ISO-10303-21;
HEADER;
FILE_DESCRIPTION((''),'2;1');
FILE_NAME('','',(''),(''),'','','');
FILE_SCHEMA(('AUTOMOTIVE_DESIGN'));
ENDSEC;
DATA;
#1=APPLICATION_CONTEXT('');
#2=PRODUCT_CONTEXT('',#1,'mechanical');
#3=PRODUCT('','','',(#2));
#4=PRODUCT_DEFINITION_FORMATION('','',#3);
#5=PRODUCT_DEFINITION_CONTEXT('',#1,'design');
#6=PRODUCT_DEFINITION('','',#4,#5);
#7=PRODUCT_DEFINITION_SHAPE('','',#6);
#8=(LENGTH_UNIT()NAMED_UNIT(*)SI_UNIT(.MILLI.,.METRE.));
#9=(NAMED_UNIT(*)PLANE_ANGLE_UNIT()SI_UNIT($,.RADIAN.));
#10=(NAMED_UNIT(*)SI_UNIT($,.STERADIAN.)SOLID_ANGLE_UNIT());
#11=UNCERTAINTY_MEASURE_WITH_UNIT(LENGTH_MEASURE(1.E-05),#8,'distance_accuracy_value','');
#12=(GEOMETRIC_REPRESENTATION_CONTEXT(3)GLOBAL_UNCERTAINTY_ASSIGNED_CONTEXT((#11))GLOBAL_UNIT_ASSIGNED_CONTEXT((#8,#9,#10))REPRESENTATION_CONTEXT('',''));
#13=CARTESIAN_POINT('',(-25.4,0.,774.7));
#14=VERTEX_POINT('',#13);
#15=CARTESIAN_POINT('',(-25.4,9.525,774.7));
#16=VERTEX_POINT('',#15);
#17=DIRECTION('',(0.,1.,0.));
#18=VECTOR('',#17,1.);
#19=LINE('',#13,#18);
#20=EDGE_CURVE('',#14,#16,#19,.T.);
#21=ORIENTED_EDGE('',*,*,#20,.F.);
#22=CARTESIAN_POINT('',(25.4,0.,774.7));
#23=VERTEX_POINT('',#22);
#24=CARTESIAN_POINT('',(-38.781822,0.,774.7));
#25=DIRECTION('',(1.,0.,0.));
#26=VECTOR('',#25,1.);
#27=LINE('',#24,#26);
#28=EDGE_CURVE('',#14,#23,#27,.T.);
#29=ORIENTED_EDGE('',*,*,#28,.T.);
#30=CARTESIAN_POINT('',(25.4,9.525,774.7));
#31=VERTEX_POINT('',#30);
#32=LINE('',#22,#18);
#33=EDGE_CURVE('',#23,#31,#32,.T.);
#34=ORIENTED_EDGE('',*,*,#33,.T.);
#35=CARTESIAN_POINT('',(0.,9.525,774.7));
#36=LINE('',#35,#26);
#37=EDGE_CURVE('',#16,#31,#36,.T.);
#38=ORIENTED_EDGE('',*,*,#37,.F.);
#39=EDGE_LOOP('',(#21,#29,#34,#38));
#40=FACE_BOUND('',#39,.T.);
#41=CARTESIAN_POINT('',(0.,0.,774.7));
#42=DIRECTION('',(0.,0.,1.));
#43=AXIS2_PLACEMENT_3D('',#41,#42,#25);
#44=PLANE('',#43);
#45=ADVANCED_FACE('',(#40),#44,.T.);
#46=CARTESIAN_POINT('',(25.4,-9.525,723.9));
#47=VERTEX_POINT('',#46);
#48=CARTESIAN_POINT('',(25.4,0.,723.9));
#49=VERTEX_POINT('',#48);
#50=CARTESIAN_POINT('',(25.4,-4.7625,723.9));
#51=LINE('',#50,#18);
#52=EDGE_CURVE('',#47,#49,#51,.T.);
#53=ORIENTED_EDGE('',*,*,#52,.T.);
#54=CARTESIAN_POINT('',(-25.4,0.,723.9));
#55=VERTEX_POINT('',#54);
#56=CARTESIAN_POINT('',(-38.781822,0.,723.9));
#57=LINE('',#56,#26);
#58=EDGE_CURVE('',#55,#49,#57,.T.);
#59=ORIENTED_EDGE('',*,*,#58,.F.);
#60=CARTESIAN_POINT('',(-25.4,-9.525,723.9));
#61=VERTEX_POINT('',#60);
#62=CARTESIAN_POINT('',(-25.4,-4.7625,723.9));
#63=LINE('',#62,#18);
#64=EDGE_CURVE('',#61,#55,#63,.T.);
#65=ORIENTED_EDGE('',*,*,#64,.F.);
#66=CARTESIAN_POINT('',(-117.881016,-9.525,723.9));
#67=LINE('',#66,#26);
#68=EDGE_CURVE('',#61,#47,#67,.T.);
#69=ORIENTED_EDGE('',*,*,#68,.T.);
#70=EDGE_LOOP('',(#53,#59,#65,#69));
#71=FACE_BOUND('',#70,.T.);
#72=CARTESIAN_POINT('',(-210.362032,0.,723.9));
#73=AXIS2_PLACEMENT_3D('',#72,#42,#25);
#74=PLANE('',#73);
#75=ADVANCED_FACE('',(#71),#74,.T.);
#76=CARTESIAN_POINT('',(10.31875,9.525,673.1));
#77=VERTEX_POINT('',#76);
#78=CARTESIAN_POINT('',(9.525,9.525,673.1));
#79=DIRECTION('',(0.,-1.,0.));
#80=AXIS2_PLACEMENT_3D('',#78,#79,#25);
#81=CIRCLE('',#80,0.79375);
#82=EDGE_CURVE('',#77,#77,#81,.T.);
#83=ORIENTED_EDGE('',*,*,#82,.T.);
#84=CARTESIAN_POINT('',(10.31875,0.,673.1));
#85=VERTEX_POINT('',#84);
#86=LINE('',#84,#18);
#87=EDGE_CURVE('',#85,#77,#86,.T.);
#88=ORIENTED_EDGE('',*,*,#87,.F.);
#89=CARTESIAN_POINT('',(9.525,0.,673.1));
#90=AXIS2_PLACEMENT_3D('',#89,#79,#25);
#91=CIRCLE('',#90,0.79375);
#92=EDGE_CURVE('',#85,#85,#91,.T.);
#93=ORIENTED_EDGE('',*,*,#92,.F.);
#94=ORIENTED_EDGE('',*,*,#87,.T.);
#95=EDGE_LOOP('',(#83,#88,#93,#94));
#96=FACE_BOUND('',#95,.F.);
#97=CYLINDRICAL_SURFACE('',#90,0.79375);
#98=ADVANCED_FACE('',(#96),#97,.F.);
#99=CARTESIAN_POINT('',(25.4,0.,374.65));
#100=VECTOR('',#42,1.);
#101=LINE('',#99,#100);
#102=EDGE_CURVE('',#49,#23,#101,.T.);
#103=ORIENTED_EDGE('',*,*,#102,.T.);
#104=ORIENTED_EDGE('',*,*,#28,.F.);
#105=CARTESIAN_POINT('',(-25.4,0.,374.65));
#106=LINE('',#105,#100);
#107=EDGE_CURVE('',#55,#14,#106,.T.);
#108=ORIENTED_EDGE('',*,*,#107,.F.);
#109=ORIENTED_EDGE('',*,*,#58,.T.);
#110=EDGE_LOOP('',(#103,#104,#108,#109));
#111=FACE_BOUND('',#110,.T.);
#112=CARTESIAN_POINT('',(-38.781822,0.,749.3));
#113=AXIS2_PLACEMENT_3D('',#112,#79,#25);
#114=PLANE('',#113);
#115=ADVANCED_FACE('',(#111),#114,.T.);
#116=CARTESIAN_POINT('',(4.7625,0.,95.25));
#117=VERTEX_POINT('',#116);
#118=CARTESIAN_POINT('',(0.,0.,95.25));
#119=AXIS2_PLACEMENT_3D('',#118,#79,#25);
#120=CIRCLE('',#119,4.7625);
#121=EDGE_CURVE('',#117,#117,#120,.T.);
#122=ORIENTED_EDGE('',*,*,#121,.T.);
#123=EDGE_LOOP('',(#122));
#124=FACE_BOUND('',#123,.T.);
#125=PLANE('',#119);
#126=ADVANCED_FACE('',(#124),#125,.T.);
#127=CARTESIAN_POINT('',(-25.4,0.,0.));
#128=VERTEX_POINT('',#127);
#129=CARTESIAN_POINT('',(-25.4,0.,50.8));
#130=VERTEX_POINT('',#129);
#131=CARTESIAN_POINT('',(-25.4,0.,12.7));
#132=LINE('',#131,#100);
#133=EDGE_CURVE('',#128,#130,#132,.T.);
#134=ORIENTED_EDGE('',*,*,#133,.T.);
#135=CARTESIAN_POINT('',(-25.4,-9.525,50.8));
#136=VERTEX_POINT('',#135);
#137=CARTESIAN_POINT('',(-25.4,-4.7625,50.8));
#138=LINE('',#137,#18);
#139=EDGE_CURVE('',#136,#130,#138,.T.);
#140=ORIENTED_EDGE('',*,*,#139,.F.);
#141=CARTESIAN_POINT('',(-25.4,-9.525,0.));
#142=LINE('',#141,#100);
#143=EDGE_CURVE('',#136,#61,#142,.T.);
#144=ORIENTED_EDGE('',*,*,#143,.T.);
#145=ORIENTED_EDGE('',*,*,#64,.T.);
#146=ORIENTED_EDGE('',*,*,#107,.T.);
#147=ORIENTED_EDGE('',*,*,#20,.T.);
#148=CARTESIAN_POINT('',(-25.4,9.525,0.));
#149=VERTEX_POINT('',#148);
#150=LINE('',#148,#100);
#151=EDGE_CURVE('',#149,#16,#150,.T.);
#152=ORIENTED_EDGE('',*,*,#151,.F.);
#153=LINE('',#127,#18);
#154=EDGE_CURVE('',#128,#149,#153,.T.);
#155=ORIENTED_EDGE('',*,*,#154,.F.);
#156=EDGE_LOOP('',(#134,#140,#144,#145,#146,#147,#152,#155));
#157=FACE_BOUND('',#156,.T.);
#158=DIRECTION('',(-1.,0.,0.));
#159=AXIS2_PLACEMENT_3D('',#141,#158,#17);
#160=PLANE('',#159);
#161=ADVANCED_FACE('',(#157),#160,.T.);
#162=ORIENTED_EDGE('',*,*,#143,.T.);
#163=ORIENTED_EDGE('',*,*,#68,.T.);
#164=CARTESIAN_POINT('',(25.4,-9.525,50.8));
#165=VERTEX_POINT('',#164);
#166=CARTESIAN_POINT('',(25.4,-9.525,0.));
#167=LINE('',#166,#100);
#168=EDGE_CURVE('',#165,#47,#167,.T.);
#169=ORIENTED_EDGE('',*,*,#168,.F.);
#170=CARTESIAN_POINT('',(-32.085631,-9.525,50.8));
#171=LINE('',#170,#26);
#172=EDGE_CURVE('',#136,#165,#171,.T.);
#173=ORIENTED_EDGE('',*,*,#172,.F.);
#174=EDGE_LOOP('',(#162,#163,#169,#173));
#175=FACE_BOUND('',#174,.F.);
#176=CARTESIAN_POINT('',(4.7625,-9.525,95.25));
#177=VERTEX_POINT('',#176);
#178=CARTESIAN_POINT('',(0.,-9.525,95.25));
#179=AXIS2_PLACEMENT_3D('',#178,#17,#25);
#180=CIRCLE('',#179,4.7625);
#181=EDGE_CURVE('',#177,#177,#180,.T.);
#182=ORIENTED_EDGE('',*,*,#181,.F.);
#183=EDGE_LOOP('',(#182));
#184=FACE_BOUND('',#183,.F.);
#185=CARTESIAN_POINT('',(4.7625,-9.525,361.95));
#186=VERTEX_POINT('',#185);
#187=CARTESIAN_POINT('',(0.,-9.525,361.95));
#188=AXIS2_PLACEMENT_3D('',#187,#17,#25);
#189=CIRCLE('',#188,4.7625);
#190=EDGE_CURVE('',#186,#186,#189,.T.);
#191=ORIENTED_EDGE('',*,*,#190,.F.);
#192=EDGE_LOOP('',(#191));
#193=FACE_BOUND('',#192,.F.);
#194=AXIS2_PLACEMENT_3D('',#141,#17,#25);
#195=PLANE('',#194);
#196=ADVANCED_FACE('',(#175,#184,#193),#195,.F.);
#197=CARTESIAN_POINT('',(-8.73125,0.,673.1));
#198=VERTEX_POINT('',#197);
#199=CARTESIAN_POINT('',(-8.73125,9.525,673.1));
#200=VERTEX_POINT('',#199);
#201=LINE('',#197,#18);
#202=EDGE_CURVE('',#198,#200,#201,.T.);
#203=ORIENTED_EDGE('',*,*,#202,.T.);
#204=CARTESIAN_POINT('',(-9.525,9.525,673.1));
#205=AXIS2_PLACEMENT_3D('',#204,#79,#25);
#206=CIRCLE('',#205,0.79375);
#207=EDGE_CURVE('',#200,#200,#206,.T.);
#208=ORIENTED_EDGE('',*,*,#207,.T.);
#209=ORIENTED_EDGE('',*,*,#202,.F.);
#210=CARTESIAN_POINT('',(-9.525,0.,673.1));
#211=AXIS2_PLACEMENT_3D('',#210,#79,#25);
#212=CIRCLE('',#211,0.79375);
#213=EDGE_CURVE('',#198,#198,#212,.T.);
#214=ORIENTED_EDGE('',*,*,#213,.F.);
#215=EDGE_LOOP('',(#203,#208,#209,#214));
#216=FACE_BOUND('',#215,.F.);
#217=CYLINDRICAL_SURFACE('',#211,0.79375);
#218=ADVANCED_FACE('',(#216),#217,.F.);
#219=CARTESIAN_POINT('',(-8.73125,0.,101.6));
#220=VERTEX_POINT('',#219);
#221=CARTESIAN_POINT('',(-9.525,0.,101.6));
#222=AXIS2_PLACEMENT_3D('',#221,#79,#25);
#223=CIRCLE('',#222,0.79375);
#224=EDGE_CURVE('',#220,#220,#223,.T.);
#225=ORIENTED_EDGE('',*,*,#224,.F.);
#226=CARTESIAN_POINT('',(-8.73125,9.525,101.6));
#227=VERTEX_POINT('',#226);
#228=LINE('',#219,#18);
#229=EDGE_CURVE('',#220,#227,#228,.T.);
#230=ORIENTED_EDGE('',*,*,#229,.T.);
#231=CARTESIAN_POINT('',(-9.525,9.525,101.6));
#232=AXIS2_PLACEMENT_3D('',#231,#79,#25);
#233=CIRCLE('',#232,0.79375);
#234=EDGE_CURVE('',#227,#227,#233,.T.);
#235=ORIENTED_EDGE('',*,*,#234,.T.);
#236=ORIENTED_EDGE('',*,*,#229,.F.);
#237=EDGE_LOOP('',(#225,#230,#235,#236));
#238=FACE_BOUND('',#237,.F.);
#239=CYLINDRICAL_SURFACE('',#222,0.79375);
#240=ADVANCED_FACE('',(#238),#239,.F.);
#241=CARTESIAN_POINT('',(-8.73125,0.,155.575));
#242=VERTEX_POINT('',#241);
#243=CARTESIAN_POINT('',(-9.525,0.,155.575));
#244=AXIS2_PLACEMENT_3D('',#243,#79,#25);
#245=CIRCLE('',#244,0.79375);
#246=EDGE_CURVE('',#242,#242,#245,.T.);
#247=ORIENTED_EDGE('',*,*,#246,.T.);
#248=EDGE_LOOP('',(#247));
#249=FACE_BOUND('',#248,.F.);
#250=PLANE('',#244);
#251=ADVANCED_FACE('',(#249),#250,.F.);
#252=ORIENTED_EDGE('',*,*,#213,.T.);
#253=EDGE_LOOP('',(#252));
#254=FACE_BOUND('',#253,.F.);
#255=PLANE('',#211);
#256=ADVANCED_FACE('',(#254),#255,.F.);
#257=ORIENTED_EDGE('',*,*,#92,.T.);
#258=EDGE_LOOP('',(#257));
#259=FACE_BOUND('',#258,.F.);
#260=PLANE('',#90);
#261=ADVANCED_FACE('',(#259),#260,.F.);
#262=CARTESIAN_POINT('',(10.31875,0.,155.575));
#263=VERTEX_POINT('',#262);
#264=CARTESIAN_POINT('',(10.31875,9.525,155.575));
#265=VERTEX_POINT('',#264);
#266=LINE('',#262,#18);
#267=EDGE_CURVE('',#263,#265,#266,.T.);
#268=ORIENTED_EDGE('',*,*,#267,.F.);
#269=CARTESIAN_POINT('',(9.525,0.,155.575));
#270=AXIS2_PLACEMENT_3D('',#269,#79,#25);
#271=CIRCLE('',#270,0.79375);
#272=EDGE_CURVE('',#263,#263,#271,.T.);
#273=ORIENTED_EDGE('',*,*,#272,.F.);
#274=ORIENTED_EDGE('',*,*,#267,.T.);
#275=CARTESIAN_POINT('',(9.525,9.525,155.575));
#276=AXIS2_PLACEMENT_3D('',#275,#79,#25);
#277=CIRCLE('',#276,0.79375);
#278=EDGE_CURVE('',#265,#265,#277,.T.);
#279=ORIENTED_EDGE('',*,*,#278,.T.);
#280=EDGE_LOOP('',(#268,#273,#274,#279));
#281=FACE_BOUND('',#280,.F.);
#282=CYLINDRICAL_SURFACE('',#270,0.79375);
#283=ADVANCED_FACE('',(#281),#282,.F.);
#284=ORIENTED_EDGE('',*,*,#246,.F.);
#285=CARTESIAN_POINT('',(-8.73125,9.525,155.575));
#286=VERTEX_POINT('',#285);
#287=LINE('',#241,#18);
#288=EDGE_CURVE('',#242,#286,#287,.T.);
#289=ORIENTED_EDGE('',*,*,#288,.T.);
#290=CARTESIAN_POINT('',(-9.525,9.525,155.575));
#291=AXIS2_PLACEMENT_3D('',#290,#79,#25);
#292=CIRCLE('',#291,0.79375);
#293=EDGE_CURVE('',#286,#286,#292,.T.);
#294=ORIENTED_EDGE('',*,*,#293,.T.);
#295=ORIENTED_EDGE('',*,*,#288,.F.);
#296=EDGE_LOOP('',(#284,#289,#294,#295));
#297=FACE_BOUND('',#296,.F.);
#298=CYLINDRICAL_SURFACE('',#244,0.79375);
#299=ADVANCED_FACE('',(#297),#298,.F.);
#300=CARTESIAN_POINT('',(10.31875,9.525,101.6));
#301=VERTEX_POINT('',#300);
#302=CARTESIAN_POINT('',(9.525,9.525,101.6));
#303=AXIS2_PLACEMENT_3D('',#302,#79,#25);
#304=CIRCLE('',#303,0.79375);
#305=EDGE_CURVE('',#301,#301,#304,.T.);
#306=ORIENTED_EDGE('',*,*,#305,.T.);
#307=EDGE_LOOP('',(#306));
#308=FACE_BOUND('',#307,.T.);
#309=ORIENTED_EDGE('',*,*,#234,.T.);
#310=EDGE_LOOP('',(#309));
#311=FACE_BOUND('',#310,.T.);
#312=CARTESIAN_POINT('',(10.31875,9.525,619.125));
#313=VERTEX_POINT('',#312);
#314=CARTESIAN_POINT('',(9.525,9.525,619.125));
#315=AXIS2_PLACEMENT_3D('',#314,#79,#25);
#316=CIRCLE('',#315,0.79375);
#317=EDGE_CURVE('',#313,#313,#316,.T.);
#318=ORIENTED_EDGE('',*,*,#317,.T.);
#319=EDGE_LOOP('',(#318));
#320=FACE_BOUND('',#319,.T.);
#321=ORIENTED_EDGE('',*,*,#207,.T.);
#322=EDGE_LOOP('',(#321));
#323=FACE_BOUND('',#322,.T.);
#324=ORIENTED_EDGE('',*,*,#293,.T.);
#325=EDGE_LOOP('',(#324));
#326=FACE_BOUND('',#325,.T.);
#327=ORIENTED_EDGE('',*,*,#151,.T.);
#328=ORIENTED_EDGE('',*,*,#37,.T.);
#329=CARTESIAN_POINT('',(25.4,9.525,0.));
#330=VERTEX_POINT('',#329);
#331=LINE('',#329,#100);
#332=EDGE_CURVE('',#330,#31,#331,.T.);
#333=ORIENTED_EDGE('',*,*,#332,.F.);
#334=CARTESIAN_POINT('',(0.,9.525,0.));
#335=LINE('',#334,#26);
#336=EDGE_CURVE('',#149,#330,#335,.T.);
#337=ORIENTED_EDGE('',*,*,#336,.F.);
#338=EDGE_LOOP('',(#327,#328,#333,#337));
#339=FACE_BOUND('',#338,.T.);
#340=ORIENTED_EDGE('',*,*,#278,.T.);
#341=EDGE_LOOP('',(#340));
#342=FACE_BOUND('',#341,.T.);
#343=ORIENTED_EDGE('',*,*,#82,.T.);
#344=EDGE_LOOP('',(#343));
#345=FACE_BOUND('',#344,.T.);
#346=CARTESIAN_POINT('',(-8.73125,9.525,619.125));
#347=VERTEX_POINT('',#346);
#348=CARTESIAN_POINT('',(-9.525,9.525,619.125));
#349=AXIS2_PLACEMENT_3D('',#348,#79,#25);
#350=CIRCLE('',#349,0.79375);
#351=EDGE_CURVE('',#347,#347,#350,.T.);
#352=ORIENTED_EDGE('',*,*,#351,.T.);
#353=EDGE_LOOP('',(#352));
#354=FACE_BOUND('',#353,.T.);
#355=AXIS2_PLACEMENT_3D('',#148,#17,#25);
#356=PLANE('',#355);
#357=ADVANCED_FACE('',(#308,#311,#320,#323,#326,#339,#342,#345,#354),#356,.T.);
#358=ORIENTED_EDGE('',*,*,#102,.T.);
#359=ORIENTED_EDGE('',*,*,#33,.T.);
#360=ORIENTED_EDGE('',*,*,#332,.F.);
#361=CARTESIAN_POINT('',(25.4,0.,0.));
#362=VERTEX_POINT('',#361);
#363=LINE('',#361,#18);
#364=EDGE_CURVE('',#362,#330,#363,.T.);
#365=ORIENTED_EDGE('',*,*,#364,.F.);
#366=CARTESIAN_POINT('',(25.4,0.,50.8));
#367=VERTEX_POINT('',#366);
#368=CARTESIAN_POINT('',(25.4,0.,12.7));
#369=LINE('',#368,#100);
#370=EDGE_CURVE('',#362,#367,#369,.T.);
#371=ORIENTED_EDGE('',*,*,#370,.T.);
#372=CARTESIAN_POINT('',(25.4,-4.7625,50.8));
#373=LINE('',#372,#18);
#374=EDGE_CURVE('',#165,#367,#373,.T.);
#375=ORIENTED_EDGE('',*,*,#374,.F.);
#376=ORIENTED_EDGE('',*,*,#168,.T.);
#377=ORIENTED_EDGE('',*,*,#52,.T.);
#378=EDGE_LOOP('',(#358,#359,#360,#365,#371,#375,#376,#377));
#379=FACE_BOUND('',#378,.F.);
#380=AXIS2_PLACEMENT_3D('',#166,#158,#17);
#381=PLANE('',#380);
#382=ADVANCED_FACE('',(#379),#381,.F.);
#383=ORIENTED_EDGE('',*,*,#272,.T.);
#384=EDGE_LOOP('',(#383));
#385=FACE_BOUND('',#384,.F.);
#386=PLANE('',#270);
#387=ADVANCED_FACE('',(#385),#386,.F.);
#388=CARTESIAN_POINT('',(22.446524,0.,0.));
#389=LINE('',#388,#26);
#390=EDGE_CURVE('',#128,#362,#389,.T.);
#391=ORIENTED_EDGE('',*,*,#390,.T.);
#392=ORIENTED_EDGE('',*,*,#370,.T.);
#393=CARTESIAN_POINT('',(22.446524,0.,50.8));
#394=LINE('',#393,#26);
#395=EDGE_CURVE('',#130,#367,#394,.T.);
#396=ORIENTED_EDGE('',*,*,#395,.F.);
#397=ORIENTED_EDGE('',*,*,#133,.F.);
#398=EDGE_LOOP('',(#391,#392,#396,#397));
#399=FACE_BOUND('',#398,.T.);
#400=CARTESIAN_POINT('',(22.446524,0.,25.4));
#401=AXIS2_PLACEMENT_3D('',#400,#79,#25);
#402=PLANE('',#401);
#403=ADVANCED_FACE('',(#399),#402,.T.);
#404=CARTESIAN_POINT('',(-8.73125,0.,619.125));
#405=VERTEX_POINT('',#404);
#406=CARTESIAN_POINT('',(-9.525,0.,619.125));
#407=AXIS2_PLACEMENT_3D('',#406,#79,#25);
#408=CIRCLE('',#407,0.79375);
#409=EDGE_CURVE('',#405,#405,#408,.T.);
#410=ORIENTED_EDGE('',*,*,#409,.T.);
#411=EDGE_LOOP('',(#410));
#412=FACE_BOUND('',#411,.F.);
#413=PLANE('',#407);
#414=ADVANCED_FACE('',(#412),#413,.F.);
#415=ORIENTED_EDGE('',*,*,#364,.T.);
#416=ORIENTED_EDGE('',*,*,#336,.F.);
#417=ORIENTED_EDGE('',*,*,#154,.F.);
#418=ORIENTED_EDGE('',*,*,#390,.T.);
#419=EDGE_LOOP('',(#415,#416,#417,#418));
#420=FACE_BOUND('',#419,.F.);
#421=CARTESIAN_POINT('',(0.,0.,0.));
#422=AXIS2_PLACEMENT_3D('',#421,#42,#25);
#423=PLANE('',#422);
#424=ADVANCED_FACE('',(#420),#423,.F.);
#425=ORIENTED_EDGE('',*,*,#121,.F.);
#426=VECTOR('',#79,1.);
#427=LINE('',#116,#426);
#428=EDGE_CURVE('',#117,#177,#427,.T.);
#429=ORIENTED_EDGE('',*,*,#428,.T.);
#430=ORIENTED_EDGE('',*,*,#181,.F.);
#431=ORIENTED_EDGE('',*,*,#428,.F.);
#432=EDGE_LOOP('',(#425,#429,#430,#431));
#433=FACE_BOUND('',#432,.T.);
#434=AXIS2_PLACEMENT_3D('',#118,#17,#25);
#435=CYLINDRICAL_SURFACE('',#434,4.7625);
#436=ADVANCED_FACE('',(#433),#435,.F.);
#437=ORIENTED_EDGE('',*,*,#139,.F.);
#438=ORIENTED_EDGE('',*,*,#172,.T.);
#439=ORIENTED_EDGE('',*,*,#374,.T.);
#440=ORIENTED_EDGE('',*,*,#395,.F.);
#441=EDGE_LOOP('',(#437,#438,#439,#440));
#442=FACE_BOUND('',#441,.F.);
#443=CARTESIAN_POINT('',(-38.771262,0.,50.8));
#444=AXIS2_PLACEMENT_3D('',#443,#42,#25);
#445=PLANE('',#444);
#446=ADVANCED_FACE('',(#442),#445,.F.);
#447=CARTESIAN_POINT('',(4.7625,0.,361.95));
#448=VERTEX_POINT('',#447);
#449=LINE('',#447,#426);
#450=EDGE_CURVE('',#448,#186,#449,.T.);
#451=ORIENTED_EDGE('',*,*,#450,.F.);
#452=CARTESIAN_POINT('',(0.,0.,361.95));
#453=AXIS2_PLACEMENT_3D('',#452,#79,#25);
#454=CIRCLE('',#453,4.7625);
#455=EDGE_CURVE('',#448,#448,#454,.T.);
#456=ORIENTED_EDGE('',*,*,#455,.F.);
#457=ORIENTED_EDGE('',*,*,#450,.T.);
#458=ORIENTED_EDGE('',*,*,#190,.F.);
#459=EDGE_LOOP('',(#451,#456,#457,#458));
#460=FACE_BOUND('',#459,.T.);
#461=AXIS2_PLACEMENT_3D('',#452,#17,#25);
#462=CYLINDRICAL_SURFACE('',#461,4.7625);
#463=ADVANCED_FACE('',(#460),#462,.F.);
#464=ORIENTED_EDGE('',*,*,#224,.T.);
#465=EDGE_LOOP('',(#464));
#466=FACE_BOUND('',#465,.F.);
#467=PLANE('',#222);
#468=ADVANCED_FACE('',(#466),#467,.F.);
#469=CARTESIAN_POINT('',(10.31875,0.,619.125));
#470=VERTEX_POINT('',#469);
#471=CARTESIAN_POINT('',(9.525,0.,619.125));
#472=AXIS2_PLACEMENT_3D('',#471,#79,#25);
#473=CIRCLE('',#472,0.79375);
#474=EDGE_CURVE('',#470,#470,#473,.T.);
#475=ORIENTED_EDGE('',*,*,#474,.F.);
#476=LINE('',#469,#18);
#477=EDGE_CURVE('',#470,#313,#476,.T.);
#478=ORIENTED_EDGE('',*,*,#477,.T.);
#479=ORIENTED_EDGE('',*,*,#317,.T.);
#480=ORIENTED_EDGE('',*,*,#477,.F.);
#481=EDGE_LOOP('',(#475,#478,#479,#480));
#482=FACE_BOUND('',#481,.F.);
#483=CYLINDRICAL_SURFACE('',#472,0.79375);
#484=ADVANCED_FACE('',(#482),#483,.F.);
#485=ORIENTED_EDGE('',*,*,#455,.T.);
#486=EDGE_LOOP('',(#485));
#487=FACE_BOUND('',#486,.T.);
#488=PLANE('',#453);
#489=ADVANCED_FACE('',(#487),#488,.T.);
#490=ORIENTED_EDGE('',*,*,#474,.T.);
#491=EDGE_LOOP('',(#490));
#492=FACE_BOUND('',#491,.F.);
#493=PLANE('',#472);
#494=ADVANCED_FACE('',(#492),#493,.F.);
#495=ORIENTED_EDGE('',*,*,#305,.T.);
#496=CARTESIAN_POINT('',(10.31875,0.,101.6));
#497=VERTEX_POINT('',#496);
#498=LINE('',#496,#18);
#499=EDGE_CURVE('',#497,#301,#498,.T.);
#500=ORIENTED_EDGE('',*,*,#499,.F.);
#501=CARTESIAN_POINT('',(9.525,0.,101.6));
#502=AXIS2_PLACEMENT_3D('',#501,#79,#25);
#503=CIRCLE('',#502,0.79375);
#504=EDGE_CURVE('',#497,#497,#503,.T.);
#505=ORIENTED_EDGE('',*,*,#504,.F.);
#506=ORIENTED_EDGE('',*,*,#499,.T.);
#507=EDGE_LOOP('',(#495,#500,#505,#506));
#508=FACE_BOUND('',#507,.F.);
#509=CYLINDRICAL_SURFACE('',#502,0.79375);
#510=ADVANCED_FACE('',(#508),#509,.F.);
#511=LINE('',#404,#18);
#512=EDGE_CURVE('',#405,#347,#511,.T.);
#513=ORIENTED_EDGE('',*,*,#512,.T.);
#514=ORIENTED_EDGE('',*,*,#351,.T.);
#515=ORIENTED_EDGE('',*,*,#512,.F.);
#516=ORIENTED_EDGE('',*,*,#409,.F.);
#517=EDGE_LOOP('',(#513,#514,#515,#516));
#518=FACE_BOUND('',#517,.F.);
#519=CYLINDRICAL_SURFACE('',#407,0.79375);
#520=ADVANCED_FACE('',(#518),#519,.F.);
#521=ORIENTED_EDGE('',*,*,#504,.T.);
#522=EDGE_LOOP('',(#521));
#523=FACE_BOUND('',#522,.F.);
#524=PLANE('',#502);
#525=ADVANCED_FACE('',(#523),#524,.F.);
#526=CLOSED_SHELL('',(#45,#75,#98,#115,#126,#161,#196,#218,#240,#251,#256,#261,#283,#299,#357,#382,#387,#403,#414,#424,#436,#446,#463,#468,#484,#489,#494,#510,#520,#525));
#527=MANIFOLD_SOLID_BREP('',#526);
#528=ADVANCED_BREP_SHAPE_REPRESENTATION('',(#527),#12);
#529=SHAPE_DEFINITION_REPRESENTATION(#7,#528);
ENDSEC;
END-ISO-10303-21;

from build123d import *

# Parameters (mm, degrees)
F0_W     = 50.8
F0_H     = 19.05
F1_DEPTH = 774.7
F2_W     = 122.43557321
F2_H     = 50.8
F2_W_2   = 343.1604206562
F3_DEPTH = 25.4
F4_R     = 0.79375
F5_DEPTH = 25.4
F6_R     = 4.7625
F7_DEPTH = 25.4


# Not quite as in the source:
# - a feature names something its author has since deleted; it is built from what else it names


with BuildPart() as f1:
    # F0 (on Top) → F1 (new body)
    with BuildSketch(Plane.XY):
        Rectangle(F0_W, F0_H)
    extrude(amount=F1_DEPTH)

    # F2 (on Front) → F3 (cut)
    with BuildSketch(Plane.XZ):
        with Locations((22.4465244144, 25.4)):
            Rectangle(F2_W, F2_H)
        with Locations((-38.7818217278, 749.3)):
            Rectangle(F2_W_2, F2_H)
    extrude(amount=F3_DEPTH, mode=Mode.SUBTRACT)

    # F4 (on Front) → F5 (cut)
    with BuildSketch(Plane.XZ):
        with Locations((9.525, 101.6)):
            Circle(F4_R)
        with Locations((9.525, 155.575)):
            Circle(F4_R)
        with Locations((9.525, 619.125)):
            Circle(F4_R)
        with Locations((9.525, 673.1)):
            Circle(F4_R)
        with Locations((-9.525, 619.125)):
            Circle(F4_R)
        with Locations((-9.525, 673.1)):
            Circle(F4_R)
        with Locations((-9.525, 101.6)):
            Circle(F4_R)
        with Locations((-9.525, 155.575)):
            Circle(F4_R)
    extrude(amount=-F5_DEPTH, mode=Mode.SUBTRACT)

    # F6 (on Front) → F7 (cut)
    with BuildSketch(Plane.XZ):
        with Locations((0, 95.25)):
            Circle(F6_R)
        with Locations((0, 361.95)):
            Circle(F6_R)
    extrude(amount=F7_DEPTH, mode=Mode.SUBTRACT)


solid = f1.part
